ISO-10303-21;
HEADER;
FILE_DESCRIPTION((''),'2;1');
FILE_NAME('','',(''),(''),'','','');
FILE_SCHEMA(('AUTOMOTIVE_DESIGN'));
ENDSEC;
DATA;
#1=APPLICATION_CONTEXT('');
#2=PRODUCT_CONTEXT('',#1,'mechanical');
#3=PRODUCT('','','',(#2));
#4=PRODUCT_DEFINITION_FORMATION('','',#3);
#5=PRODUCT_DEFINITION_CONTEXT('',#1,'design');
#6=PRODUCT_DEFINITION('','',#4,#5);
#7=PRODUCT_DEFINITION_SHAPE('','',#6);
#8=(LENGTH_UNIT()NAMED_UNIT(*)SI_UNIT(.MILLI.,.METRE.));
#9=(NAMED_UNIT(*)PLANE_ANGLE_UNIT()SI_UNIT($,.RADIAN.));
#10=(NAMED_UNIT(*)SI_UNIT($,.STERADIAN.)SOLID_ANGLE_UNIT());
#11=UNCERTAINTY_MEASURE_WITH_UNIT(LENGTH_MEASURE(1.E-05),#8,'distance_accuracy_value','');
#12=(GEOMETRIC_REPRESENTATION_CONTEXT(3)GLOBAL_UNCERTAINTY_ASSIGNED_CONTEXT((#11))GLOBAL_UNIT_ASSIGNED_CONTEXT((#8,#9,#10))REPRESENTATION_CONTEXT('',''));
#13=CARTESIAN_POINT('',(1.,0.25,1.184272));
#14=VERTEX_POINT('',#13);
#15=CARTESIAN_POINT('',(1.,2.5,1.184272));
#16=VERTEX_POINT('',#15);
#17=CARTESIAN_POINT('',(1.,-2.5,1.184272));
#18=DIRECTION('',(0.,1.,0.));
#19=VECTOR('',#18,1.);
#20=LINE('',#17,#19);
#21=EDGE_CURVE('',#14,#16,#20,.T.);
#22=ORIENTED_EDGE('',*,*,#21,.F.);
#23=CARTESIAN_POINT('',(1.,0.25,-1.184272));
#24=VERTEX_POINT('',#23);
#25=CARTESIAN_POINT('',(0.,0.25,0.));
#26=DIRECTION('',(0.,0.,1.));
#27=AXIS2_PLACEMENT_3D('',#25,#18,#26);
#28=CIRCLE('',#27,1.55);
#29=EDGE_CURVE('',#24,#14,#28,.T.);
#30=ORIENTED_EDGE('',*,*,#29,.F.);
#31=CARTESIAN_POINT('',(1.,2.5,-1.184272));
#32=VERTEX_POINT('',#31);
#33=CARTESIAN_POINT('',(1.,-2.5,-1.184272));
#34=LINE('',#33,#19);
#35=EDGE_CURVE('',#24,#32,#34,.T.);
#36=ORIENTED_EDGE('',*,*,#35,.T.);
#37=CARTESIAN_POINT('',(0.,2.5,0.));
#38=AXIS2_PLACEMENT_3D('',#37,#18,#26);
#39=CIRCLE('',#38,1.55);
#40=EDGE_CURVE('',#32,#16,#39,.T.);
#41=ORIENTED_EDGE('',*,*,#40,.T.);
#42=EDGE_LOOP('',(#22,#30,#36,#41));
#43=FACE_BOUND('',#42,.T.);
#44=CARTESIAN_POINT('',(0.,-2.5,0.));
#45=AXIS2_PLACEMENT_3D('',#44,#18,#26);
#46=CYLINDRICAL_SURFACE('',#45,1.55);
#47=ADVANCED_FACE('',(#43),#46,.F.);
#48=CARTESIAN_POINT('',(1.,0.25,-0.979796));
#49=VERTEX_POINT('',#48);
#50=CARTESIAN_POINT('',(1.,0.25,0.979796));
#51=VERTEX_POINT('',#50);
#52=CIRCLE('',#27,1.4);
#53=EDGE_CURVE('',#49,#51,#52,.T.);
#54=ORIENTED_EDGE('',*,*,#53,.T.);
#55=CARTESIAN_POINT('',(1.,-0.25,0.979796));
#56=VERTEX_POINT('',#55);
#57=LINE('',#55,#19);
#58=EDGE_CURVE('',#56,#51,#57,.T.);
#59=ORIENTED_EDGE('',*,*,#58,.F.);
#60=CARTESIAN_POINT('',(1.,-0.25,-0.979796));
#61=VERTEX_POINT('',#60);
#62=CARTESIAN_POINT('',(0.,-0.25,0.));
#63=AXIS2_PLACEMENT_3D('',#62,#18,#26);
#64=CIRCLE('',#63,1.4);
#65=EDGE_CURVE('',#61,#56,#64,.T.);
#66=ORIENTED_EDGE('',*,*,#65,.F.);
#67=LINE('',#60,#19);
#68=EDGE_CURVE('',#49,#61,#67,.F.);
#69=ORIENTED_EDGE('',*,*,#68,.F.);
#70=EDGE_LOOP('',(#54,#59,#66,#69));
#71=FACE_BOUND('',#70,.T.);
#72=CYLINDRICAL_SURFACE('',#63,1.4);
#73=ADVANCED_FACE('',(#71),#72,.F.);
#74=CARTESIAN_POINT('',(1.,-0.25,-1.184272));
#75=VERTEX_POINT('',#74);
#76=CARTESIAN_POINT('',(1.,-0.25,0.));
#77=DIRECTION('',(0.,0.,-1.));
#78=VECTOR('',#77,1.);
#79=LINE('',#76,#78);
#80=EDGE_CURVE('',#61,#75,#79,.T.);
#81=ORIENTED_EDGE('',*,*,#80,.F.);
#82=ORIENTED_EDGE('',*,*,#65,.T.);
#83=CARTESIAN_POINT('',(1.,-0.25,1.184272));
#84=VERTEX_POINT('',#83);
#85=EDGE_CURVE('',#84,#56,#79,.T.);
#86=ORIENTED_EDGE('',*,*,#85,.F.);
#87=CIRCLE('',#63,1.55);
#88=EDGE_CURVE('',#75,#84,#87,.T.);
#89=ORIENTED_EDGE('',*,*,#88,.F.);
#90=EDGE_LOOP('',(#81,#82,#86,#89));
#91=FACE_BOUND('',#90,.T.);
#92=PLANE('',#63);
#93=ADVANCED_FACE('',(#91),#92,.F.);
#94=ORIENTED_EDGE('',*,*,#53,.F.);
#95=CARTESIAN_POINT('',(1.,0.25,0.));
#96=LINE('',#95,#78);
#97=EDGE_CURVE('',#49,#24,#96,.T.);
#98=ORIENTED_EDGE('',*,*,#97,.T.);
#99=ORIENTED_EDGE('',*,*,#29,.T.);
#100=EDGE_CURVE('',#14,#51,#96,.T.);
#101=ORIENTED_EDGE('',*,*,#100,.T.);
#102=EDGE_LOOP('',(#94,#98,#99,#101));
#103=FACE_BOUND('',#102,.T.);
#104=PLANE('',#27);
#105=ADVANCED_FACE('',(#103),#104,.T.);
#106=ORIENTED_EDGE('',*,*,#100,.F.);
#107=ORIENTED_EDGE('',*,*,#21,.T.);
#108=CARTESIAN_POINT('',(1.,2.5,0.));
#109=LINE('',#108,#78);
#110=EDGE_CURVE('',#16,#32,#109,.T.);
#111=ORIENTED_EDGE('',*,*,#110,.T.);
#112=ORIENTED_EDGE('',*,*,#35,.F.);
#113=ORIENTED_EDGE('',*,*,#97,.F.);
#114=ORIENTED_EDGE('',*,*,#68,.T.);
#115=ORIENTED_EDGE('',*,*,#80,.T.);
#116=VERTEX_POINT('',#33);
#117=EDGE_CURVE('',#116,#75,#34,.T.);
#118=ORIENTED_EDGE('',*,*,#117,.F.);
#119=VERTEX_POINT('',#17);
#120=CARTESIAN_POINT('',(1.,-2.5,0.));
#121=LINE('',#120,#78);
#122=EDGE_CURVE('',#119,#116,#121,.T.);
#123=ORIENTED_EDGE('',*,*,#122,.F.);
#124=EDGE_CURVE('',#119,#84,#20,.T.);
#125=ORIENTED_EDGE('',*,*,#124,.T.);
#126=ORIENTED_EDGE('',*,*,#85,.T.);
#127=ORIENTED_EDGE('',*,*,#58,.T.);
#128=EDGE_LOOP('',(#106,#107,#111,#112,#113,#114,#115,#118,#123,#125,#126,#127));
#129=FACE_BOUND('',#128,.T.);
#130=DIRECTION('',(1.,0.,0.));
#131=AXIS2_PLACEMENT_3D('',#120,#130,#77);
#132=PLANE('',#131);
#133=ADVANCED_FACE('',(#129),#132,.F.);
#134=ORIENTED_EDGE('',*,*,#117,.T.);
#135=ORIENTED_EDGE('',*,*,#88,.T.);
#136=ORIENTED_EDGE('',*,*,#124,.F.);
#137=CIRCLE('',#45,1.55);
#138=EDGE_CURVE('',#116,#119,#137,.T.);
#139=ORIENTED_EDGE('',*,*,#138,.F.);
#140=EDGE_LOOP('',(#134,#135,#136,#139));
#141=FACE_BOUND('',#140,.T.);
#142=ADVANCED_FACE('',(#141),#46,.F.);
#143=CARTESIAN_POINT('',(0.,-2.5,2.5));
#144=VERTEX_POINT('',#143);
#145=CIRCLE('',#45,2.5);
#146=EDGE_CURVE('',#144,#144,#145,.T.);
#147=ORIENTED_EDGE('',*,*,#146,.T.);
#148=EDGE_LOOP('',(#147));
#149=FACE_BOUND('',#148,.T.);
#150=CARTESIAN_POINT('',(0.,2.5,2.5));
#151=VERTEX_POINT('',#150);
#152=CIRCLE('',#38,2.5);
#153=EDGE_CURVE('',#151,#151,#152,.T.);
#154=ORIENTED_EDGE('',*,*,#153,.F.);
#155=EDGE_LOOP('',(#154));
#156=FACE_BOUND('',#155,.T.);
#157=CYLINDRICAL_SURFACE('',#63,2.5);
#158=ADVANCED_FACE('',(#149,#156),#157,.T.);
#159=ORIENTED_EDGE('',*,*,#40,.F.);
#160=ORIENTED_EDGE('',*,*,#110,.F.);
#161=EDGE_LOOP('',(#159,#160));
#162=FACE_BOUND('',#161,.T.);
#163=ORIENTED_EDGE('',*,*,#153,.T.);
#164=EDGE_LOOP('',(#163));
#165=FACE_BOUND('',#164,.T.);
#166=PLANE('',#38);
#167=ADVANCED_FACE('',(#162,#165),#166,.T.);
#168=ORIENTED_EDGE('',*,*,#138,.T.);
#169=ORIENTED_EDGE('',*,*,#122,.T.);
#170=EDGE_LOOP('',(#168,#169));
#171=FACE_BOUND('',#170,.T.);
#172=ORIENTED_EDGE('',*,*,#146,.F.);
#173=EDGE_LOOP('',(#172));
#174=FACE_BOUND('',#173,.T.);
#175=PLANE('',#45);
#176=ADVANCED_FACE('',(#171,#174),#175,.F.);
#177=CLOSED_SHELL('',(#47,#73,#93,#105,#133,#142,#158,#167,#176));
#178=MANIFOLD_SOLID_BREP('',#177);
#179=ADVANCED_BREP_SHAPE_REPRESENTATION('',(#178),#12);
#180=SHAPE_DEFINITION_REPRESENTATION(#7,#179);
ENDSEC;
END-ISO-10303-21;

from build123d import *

# Parameters (mm, degrees)
EXTRUDE_1_DEPTH      = 0.25
EXTRUDE_1_DEPTH_BACK = 0.25
SKETCH_1_R           = 2.5
SKETCH_1_R_2         = 1.4
EXTRUDE_2_DEPTH      = 2.5
EXTRUDE_2_DEPTH_BACK = 2.5
SKETCH_1_3_R         = 2.5


with BuildPart() as part:
    # 草图1 → 凸台-拉伸1 (new, two sides: drawn at the far end of the back side and taken through both)
    with BuildSketch(Plane(origin=(0, 0, 0), x_dir=(1, 0, 0), z_dir=(0, 1, 0)).offset(-EXTRUDE_1_DEPTH_BACK)):
        Circle(SKETCH_1_R)
        Circle(SKETCH_1_R_2, mode=Mode.SUBTRACT)
    extrude(amount=EXTRUDE_1_DEPTH + EXTRUDE_1_DEPTH_BACK)

    # 草图1<3> → 凸台-拉伸2 (add, two sides: drawn at the far end of the back side and taken through both)
    with BuildSketch(Plane(origin=(0, 0, 0), x_dir=(1, 0, 0), z_dir=(0, 1, 0)).offset(-EXTRUDE_2_DEPTH_BACK)):
        Circle(SKETCH_1_3_R)
        with BuildLine():
            ThreePointArc((1, -1.184271928), (-1.55, 0), (1, 1.184271928))
            Line((1, 1.184271928), (1, -1.184271928))
        make_face(mode=Mode.SUBTRACT)
    extrude(amount=EXTRUDE_2_DEPTH + EXTRUDE_2_DEPTH_BACK)


solid = part.part
